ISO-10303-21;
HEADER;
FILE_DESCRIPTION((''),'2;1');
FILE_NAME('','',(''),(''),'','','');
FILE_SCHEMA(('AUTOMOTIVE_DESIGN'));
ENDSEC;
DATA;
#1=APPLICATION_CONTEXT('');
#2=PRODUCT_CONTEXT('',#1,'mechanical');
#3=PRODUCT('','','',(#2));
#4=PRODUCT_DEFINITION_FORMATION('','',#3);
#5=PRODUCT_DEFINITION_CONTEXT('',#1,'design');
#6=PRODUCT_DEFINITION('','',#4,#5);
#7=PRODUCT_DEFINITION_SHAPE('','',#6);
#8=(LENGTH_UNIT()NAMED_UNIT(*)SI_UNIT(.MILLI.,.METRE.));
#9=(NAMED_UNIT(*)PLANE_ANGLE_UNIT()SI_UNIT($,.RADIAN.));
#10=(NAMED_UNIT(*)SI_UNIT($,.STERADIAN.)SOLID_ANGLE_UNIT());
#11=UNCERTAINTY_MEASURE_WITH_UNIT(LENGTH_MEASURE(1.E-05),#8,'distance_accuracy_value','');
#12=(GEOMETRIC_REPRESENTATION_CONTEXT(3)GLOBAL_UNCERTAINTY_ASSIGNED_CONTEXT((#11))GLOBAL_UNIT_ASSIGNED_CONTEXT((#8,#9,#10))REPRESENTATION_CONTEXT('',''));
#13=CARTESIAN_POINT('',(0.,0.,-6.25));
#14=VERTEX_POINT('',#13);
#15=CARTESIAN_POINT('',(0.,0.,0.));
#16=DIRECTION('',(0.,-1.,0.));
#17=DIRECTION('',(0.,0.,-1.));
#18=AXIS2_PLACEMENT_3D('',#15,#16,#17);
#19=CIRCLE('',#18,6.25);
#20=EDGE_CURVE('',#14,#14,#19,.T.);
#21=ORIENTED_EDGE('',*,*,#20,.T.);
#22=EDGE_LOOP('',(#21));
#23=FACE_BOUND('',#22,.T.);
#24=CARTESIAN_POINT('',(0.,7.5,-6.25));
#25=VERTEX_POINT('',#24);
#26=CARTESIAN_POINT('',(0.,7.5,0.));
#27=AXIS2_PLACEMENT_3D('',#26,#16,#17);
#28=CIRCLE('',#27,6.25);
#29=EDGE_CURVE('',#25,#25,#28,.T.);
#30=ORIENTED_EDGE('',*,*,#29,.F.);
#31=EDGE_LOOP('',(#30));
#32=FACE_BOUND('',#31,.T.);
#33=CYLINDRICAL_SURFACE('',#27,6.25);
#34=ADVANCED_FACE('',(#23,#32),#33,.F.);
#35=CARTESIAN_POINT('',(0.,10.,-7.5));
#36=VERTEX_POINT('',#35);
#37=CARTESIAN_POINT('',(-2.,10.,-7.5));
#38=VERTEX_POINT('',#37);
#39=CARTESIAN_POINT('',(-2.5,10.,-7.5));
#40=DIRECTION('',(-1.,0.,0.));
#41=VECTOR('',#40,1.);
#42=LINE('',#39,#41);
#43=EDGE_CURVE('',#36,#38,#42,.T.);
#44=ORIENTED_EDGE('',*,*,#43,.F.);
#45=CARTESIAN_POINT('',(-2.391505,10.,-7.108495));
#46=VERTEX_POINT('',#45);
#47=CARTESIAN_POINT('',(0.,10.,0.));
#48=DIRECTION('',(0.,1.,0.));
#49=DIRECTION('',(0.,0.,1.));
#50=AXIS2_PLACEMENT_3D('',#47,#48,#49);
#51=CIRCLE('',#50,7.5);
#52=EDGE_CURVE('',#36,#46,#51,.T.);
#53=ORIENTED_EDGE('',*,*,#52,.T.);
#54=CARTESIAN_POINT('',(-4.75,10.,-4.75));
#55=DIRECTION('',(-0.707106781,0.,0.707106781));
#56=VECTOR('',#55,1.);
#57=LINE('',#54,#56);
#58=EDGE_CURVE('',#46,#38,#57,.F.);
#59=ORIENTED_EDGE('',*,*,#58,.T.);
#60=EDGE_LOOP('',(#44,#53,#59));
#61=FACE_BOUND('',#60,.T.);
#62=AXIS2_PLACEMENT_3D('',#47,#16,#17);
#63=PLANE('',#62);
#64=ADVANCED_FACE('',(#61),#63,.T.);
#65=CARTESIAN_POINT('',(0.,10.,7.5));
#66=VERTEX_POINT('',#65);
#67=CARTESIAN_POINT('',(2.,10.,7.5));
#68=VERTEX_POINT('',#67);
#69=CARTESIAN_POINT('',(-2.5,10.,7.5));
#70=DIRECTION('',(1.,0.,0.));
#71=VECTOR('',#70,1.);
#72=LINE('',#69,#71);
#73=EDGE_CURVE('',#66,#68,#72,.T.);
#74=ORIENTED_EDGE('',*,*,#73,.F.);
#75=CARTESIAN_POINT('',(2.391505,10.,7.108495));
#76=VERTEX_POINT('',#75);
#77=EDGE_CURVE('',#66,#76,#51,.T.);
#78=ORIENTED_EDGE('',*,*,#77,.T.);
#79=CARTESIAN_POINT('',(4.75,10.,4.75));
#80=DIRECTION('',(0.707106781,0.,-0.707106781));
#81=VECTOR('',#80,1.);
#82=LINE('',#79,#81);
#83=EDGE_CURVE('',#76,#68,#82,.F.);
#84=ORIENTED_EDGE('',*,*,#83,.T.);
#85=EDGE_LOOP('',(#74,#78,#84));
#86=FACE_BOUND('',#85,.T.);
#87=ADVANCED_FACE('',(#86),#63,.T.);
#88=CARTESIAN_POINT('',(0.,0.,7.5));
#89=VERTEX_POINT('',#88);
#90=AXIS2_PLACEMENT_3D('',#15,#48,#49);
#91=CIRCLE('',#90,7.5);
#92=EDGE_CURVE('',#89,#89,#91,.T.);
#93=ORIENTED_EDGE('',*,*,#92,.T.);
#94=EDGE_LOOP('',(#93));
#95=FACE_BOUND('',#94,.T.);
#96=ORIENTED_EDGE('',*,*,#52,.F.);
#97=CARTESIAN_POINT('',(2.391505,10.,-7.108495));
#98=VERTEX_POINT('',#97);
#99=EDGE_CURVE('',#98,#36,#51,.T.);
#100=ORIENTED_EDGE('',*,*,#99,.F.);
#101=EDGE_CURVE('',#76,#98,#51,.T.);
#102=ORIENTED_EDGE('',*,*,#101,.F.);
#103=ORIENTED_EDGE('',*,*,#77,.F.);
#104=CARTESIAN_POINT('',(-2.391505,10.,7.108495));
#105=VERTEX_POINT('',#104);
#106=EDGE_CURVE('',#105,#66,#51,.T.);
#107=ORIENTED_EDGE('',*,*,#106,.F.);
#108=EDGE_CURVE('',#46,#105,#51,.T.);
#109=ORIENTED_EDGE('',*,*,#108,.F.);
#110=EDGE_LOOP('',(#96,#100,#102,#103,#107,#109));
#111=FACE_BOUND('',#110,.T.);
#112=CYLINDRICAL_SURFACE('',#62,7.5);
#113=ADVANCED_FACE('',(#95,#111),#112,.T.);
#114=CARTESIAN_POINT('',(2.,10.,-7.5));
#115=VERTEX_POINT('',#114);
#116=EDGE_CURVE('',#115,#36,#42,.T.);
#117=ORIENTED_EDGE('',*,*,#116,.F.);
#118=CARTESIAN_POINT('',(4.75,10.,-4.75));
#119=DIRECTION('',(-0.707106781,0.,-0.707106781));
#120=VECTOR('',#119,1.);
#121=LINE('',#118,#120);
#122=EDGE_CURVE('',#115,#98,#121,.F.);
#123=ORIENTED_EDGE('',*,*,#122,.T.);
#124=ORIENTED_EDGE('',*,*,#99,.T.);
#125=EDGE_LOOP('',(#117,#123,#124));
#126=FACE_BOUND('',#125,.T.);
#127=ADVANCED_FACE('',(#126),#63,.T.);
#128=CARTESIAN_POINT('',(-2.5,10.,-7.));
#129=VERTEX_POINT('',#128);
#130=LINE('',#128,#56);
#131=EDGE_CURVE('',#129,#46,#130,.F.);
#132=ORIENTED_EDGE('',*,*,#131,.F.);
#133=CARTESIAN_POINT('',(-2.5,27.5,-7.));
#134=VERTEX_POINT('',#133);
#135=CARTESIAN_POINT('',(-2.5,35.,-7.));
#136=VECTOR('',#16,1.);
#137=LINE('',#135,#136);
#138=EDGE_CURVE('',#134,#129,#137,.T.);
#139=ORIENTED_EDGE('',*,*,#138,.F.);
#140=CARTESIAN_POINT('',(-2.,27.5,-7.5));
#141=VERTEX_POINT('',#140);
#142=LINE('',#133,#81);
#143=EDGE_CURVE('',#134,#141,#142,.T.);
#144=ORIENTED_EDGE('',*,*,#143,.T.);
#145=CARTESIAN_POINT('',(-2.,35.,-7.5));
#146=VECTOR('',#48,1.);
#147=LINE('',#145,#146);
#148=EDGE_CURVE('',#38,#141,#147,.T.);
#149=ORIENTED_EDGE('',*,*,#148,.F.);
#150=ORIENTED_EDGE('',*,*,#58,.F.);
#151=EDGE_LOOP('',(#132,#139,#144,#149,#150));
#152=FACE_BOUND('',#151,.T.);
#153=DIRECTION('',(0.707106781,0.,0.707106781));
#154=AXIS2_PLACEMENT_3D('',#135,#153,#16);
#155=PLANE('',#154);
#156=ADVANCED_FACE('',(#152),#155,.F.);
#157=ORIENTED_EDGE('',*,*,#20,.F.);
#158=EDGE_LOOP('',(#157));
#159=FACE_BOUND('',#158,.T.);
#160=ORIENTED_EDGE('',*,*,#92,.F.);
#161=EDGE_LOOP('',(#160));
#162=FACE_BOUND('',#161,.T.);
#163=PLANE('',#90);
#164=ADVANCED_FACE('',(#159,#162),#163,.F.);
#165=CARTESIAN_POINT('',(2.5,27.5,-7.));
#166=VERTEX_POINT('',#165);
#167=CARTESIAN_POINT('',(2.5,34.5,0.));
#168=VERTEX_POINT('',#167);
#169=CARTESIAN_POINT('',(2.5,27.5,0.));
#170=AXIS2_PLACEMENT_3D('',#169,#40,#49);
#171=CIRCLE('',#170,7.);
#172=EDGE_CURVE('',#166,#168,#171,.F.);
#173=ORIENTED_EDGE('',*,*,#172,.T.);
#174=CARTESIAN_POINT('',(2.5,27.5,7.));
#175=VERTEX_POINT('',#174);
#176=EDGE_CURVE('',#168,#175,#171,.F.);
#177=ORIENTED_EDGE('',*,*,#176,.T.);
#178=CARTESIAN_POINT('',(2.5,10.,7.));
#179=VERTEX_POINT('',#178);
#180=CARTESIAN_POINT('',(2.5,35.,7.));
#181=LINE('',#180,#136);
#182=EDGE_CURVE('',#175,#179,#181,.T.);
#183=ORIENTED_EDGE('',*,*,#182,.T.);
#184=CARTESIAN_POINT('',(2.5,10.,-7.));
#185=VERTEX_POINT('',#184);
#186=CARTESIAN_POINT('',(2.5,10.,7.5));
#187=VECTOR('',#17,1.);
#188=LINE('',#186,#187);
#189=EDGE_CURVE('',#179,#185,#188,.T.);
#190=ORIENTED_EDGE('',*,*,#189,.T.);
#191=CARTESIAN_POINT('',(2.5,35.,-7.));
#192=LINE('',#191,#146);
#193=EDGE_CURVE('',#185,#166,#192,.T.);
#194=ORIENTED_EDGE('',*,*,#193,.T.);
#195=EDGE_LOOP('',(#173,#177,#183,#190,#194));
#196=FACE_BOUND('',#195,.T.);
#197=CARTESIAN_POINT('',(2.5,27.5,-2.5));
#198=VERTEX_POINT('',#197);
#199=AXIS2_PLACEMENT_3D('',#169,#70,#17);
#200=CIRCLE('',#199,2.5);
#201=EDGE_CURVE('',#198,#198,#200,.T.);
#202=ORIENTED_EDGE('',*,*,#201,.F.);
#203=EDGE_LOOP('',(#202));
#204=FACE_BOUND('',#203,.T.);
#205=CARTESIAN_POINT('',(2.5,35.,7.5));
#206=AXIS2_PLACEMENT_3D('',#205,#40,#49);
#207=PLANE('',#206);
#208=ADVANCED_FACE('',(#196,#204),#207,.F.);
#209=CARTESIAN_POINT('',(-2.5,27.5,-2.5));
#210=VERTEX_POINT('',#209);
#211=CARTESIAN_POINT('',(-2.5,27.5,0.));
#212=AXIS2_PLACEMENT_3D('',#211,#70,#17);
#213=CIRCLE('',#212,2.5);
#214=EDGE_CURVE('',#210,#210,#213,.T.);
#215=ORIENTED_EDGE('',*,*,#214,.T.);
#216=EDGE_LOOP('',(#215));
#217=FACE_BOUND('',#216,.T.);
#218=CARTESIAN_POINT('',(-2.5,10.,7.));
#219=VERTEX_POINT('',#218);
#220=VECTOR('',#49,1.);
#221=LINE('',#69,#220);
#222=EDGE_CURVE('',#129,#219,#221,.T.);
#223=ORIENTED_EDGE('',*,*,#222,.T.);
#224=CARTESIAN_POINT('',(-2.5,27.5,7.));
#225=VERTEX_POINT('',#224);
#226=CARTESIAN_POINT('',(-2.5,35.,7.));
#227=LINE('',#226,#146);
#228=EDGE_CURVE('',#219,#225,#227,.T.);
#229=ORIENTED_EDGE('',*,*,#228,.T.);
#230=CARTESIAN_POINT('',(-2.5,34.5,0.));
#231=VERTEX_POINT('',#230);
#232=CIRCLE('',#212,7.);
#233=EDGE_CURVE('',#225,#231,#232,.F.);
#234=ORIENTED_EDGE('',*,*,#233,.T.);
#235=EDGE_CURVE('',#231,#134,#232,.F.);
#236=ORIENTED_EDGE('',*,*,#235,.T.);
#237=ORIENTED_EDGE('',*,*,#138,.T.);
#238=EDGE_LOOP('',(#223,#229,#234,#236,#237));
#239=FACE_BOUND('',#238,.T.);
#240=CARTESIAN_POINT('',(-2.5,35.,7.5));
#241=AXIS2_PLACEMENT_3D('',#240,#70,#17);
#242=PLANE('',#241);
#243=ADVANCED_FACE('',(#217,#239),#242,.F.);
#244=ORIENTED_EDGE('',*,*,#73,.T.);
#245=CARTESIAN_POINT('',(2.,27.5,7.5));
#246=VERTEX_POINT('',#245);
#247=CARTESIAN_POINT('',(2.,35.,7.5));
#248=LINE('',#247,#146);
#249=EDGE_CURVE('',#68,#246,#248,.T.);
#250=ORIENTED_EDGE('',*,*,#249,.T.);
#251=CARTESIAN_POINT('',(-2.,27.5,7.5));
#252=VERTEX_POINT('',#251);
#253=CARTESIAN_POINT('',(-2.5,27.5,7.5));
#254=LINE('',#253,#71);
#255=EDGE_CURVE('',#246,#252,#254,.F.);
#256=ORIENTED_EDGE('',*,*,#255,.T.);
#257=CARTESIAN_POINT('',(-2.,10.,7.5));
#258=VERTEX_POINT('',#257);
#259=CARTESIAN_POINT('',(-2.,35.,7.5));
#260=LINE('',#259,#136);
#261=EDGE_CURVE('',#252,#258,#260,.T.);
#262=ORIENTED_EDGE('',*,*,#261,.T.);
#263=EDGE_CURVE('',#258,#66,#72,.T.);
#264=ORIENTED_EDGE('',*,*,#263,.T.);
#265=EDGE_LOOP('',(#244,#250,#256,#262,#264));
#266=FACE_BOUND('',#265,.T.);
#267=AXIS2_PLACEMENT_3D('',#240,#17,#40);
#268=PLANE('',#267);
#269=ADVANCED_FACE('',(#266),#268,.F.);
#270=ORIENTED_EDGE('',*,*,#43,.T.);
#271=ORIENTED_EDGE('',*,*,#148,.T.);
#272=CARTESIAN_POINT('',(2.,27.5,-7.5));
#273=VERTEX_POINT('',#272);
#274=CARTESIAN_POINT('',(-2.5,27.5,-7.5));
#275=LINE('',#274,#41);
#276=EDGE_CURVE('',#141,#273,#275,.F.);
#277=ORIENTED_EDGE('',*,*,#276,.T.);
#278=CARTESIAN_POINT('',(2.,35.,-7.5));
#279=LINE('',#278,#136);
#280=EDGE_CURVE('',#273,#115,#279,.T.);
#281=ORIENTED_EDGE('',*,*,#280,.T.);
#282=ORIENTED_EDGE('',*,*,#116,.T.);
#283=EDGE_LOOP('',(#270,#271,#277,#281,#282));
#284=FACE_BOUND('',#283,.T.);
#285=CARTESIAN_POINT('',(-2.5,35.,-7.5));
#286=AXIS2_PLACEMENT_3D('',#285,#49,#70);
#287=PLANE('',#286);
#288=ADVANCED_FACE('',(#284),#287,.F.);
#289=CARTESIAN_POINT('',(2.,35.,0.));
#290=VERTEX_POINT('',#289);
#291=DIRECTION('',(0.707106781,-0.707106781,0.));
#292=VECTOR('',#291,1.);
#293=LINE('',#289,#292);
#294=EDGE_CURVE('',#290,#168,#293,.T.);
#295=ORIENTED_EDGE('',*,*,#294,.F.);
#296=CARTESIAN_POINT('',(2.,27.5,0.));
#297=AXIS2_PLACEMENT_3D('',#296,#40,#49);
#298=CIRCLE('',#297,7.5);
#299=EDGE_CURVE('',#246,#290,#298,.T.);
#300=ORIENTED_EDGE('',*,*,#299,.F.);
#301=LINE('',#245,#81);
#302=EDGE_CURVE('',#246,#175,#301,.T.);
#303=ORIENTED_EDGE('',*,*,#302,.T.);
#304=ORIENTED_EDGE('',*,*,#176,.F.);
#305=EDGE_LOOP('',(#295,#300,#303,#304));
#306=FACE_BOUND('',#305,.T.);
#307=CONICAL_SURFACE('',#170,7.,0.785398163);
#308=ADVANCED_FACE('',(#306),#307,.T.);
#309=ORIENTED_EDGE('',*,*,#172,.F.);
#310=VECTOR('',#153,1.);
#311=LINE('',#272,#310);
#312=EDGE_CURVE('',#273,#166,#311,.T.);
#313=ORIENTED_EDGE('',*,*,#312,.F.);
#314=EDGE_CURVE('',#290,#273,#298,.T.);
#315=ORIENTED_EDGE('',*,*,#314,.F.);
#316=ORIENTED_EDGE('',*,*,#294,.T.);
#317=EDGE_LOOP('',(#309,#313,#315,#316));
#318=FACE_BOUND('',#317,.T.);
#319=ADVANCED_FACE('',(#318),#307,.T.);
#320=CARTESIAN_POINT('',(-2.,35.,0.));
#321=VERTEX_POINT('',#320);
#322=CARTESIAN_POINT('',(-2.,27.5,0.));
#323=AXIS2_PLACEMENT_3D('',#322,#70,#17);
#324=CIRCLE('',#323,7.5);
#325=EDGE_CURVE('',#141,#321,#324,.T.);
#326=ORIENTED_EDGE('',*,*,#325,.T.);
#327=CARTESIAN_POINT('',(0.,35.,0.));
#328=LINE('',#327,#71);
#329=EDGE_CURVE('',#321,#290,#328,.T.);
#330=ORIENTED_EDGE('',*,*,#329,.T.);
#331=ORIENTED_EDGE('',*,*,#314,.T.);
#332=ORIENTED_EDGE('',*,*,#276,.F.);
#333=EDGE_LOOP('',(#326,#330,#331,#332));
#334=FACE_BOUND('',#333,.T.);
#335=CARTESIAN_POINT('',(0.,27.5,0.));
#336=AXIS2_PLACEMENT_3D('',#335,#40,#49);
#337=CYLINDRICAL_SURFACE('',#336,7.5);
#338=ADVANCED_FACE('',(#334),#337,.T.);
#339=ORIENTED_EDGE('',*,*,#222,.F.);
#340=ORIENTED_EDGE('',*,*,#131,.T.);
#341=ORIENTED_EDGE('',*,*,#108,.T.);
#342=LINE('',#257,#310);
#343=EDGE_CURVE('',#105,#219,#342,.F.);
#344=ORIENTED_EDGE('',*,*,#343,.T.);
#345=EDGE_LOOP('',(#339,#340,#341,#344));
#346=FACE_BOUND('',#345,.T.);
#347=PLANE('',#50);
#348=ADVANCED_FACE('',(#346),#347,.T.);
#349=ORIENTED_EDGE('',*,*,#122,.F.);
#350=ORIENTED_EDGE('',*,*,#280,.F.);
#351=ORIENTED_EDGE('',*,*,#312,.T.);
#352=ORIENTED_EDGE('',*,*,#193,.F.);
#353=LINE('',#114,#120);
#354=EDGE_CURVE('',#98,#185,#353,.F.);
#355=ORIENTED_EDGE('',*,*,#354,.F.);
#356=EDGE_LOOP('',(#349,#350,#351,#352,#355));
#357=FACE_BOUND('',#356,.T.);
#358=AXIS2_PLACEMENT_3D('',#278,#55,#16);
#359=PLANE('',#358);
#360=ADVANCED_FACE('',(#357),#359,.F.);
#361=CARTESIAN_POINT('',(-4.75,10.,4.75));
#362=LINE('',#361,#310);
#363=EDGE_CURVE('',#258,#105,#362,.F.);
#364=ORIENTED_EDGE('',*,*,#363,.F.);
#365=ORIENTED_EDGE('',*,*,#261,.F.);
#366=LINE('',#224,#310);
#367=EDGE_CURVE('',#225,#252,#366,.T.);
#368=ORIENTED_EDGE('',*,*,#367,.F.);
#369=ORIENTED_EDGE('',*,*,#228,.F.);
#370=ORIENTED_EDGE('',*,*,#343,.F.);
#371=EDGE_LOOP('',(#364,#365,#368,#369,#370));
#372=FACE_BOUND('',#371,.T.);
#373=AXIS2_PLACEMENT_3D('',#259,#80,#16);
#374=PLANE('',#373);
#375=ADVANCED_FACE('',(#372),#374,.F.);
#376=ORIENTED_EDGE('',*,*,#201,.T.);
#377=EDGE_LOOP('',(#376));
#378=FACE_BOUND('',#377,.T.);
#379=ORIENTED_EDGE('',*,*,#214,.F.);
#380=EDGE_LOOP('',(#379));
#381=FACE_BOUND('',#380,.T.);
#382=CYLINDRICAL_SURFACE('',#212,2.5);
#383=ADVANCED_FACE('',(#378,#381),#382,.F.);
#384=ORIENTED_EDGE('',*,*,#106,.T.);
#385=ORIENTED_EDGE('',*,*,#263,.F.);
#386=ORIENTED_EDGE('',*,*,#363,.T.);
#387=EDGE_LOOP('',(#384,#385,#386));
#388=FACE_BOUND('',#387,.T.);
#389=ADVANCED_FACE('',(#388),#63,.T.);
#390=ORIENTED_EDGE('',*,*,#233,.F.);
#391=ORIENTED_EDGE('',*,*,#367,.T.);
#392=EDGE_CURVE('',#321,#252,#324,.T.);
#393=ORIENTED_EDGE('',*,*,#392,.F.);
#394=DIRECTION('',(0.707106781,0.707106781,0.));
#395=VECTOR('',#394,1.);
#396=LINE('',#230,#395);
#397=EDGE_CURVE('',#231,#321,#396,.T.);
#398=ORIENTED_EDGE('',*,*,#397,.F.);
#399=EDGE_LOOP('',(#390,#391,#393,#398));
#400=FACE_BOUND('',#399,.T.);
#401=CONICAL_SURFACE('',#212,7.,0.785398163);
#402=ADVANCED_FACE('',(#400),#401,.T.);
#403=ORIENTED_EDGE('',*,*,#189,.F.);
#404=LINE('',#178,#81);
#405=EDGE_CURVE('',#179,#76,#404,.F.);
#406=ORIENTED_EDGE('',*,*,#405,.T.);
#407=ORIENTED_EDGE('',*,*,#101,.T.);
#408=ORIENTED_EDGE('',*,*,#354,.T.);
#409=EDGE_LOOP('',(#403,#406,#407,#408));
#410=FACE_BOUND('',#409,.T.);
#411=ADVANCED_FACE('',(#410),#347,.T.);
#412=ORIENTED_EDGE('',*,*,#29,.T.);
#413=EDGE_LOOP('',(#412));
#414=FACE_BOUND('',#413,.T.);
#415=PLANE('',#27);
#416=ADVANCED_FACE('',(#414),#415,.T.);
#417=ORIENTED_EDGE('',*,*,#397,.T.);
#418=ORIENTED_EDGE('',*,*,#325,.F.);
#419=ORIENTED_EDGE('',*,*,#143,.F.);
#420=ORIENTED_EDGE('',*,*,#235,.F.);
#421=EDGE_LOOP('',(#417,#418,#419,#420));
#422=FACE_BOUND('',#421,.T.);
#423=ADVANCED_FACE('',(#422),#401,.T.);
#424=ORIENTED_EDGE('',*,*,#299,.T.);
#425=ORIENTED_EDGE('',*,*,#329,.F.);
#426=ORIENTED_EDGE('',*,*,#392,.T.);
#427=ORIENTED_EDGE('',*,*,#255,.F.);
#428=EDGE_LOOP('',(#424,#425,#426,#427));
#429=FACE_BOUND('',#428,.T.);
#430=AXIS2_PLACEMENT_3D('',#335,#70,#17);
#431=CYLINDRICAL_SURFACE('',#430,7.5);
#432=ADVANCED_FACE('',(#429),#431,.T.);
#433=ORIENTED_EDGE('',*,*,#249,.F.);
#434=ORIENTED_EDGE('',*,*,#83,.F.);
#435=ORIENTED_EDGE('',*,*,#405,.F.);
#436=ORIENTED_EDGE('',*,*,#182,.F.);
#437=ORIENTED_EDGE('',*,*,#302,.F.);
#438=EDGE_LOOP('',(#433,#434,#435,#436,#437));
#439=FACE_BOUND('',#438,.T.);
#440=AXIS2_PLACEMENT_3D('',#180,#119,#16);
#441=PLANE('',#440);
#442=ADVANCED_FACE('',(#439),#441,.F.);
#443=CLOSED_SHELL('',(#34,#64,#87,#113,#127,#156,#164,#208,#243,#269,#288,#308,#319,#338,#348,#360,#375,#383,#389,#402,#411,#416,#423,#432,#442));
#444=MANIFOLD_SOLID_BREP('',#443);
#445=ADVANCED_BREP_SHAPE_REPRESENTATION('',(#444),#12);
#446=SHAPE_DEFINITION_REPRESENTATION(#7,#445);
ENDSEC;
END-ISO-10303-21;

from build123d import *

# Parameters (mm, degrees)
SKETCH1_R           = 7.5
BOSS_EXTRUDE1_DEPTH = 10
SKETCH2_R           = 6.25
CUT_EXTRUDE2_DEPTH  = 7.5
SKETCH3_W           = 5
SKETCH3_H           = 15
BOSS_EXTRUDE2_DEPTH = 25
SKETCH4_R           = 2.5
CUT_EXTRUDE3_DEPTH  = 5
FILLET1_R           = 7.5
CHAMFER1_SIZE       = 0.5


# Some blends are built 0.0001 mm under size
with BuildPart() as part:
    # Sketch1 → Boss-Extrude1 (new body)
    with BuildSketch(Plane(origin=(0, 0, 0), x_dir=(1, 0, 0), z_dir=(0, 1, 0))):
        with Locations(Location((0, 0, 0), (0, 0, 270))):
            Circle(SKETCH1_R)
    extrude(amount=BOSS_EXTRUDE1_DEPTH)

    # Sketch2 → Cut-Extrude2 (cut)
    with BuildSketch(Plane.XZ):
        with Locations(Location((0, 0, 0), (0, 0, 270))):
            Circle(SKETCH2_R)
    extrude(amount=-CUT_EXTRUDE2_DEPTH, mode=Mode.SUBTRACT)

    # Sketch3 → Boss-Extrude2 (add)
    with BuildSketch(Plane(origin=(0, 10, 0), x_dir=(1, 0, 0), z_dir=(0, 1, 0))):
        Rectangle(SKETCH3_W, SKETCH3_H)
    extrude(amount=BOSS_EXTRUDE2_DEPTH)

    # Sketch4 → Cut-Extrude3 (cut)
    with BuildSketch(Plane(origin=(2.5, 0, 0), x_dir=(0, 0, -1), z_dir=(1, 0, 0))):
        with Locations((0, 27.5)):
            Circle(SKETCH4_R)
    extrude(amount=-CUT_EXTRUDE3_DEPTH, mode=Mode.SUBTRACT)

    # Fillet1
    fillet1_edges = [part.edges().sort_by_distance(p)[0] for p in [
        (0, 35, -7.5),
        (0, 35, 7.5),
    ]]
    fillet(fillet1_edges, radius=FILLET1_R - 0.0001)  # a hair under: the kernel refuses the full size

    # Chamfer1
    # the kernel refuses this chamfer: 0.5 mm, written as the material it takes off along each edge
    with BuildSketch(Plane(origin=(-2.5, 10, 7.5), x_dir=(-0.027495876610586462, 0, -0.9996219169112968), z_dir=(0, 1, 0)), Plane(origin=(2.5, 10, 7.5), x_dir=(-0.9996219169112968, 0, 0.027495876610585623), z_dir=(0, 1, 0))) as chamfer1_piece_1:
        Polygon((CHAMFER1_SIZE * 0.999621916911, -CHAMFER1_SIZE * 0.0274958766106), (-CHAMFER1_SIZE * 0.0274958766106, -CHAMFER1_SIZE * 0.999621916911), (0, 0), align=None)
    extrude(amount=17.5001, mode=Mode.SUBTRACT)
    with BuildSketch(Plane(origin=(-2.5, 10, -7.5), x_dir=(-0.02749587661058651, 0, 0.9996219169112968), z_dir=(0, 1, 0)), Plane(origin=(2.5, 10, -7.5), x_dir=(-0.9996219169112968, 0, -0.027495876610585623), z_dir=(0, 1, 0))) as chamfer1_piece_2:
        Polygon((CHAMFER1_SIZE * 0.999621916911, CHAMFER1_SIZE * 0.0274958766106), (-CHAMFER1_SIZE * 0.0274958766106, CHAMFER1_SIZE * 0.999621916911), (0, 0), align=None)
    extrude(amount=17.5001, mode=Mode.SUBTRACT)
    with BuildSketch(Plane(origin=(-2.5, 27.5001, 0.0001), x_dir=(0, 0, 1), z_dir=(0, -1, 0))) as chamfer1_piece_3:
        Polygon((7.4999 - CHAMFER1_SIZE, 0), (7.4999, -CHAMFER1_SIZE), (7.4999, 0), align=None)
    revolve(axis=Axis((-2.5, 27.5001, 0.0001), (-1, 0, 0)), revolution_arc=90, mode=Mode.SUBTRACT)
    with BuildSketch(Plane(origin=(-2.5, 27.5001, -0.0001), x_dir=(0, 0, -1), z_dir=(0, -1, 0))) as chamfer1_piece_4:
        Polygon((7.4999 - CHAMFER1_SIZE, 0), (7.4999, CHAMFER1_SIZE), (7.4999, 0), align=None)
    revolve(axis=Axis((-2.5, 27.5001, -0.0001), (1, 0, 0)), revolution_arc=90, mode=Mode.SUBTRACT)
    with BuildSketch(Plane(origin=(2.5, 27.5001, 0.0001), x_dir=(0, 0, 1), z_dir=(0, -1, 0))) as chamfer1_piece_5:
        Polygon((7.4999, CHAMFER1_SIZE), (7.4999 - CHAMFER1_SIZE, 0), (7.4999, 0), align=None)
    revolve(axis=Axis((2.5, 27.5001, 0.0001), (-1, 0, 0)), revolution_arc=90, mode=Mode.SUBTRACT)
    with BuildSketch(Plane(origin=(2.5, 27.5001, -0.0001), x_dir=(0, 0, -1), z_dir=(0, -1, 0))) as chamfer1_piece_6:
        Polygon((7.4999, -CHAMFER1_SIZE), (7.4999 - CHAMFER1_SIZE, 0), (7.4999, 0), align=None)
    revolve(axis=Axis((2.5, 27.5001, -0.0001), (1, 0, 0)), revolution_arc=90, mode=Mode.SUBTRACT)
    with BuildSketch(Plane(origin=(2.5, 35, 0.0001), x_dir=(-0.999621916911297, 0.027495876610582174, 0), z_dir=(0, 0, -1))) as chamfer1_piece_7:
        Polygon((CHAMFER1_SIZE * 0.999621916911, -CHAMFER1_SIZE * 0.0274958766106), (-CHAMFER1_SIZE * 0.0274958766106, -CHAMFER1_SIZE * 0.999621916911), (0, 0), align=None)
    extrude(amount=0.0002, mode=Mode.SUBTRACT)
    with BuildSketch(Plane(origin=(-2.5, 35, -0.0001), x_dir=(-0.027495876610586605, -0.9996219169112968, 0), z_dir=(0, 0, 1))) as chamfer1_piece_8:
        Polygon((CHAMFER1_SIZE * 0.999621916911, CHAMFER1_SIZE * 0.0274958766106), (-CHAMFER1_SIZE * 0.0274958766106, CHAMFER1_SIZE * 0.999621916911), (0, 0), align=None)
    extrude(amount=0.0002, mode=Mode.SUBTRACT)


solid = part.part
